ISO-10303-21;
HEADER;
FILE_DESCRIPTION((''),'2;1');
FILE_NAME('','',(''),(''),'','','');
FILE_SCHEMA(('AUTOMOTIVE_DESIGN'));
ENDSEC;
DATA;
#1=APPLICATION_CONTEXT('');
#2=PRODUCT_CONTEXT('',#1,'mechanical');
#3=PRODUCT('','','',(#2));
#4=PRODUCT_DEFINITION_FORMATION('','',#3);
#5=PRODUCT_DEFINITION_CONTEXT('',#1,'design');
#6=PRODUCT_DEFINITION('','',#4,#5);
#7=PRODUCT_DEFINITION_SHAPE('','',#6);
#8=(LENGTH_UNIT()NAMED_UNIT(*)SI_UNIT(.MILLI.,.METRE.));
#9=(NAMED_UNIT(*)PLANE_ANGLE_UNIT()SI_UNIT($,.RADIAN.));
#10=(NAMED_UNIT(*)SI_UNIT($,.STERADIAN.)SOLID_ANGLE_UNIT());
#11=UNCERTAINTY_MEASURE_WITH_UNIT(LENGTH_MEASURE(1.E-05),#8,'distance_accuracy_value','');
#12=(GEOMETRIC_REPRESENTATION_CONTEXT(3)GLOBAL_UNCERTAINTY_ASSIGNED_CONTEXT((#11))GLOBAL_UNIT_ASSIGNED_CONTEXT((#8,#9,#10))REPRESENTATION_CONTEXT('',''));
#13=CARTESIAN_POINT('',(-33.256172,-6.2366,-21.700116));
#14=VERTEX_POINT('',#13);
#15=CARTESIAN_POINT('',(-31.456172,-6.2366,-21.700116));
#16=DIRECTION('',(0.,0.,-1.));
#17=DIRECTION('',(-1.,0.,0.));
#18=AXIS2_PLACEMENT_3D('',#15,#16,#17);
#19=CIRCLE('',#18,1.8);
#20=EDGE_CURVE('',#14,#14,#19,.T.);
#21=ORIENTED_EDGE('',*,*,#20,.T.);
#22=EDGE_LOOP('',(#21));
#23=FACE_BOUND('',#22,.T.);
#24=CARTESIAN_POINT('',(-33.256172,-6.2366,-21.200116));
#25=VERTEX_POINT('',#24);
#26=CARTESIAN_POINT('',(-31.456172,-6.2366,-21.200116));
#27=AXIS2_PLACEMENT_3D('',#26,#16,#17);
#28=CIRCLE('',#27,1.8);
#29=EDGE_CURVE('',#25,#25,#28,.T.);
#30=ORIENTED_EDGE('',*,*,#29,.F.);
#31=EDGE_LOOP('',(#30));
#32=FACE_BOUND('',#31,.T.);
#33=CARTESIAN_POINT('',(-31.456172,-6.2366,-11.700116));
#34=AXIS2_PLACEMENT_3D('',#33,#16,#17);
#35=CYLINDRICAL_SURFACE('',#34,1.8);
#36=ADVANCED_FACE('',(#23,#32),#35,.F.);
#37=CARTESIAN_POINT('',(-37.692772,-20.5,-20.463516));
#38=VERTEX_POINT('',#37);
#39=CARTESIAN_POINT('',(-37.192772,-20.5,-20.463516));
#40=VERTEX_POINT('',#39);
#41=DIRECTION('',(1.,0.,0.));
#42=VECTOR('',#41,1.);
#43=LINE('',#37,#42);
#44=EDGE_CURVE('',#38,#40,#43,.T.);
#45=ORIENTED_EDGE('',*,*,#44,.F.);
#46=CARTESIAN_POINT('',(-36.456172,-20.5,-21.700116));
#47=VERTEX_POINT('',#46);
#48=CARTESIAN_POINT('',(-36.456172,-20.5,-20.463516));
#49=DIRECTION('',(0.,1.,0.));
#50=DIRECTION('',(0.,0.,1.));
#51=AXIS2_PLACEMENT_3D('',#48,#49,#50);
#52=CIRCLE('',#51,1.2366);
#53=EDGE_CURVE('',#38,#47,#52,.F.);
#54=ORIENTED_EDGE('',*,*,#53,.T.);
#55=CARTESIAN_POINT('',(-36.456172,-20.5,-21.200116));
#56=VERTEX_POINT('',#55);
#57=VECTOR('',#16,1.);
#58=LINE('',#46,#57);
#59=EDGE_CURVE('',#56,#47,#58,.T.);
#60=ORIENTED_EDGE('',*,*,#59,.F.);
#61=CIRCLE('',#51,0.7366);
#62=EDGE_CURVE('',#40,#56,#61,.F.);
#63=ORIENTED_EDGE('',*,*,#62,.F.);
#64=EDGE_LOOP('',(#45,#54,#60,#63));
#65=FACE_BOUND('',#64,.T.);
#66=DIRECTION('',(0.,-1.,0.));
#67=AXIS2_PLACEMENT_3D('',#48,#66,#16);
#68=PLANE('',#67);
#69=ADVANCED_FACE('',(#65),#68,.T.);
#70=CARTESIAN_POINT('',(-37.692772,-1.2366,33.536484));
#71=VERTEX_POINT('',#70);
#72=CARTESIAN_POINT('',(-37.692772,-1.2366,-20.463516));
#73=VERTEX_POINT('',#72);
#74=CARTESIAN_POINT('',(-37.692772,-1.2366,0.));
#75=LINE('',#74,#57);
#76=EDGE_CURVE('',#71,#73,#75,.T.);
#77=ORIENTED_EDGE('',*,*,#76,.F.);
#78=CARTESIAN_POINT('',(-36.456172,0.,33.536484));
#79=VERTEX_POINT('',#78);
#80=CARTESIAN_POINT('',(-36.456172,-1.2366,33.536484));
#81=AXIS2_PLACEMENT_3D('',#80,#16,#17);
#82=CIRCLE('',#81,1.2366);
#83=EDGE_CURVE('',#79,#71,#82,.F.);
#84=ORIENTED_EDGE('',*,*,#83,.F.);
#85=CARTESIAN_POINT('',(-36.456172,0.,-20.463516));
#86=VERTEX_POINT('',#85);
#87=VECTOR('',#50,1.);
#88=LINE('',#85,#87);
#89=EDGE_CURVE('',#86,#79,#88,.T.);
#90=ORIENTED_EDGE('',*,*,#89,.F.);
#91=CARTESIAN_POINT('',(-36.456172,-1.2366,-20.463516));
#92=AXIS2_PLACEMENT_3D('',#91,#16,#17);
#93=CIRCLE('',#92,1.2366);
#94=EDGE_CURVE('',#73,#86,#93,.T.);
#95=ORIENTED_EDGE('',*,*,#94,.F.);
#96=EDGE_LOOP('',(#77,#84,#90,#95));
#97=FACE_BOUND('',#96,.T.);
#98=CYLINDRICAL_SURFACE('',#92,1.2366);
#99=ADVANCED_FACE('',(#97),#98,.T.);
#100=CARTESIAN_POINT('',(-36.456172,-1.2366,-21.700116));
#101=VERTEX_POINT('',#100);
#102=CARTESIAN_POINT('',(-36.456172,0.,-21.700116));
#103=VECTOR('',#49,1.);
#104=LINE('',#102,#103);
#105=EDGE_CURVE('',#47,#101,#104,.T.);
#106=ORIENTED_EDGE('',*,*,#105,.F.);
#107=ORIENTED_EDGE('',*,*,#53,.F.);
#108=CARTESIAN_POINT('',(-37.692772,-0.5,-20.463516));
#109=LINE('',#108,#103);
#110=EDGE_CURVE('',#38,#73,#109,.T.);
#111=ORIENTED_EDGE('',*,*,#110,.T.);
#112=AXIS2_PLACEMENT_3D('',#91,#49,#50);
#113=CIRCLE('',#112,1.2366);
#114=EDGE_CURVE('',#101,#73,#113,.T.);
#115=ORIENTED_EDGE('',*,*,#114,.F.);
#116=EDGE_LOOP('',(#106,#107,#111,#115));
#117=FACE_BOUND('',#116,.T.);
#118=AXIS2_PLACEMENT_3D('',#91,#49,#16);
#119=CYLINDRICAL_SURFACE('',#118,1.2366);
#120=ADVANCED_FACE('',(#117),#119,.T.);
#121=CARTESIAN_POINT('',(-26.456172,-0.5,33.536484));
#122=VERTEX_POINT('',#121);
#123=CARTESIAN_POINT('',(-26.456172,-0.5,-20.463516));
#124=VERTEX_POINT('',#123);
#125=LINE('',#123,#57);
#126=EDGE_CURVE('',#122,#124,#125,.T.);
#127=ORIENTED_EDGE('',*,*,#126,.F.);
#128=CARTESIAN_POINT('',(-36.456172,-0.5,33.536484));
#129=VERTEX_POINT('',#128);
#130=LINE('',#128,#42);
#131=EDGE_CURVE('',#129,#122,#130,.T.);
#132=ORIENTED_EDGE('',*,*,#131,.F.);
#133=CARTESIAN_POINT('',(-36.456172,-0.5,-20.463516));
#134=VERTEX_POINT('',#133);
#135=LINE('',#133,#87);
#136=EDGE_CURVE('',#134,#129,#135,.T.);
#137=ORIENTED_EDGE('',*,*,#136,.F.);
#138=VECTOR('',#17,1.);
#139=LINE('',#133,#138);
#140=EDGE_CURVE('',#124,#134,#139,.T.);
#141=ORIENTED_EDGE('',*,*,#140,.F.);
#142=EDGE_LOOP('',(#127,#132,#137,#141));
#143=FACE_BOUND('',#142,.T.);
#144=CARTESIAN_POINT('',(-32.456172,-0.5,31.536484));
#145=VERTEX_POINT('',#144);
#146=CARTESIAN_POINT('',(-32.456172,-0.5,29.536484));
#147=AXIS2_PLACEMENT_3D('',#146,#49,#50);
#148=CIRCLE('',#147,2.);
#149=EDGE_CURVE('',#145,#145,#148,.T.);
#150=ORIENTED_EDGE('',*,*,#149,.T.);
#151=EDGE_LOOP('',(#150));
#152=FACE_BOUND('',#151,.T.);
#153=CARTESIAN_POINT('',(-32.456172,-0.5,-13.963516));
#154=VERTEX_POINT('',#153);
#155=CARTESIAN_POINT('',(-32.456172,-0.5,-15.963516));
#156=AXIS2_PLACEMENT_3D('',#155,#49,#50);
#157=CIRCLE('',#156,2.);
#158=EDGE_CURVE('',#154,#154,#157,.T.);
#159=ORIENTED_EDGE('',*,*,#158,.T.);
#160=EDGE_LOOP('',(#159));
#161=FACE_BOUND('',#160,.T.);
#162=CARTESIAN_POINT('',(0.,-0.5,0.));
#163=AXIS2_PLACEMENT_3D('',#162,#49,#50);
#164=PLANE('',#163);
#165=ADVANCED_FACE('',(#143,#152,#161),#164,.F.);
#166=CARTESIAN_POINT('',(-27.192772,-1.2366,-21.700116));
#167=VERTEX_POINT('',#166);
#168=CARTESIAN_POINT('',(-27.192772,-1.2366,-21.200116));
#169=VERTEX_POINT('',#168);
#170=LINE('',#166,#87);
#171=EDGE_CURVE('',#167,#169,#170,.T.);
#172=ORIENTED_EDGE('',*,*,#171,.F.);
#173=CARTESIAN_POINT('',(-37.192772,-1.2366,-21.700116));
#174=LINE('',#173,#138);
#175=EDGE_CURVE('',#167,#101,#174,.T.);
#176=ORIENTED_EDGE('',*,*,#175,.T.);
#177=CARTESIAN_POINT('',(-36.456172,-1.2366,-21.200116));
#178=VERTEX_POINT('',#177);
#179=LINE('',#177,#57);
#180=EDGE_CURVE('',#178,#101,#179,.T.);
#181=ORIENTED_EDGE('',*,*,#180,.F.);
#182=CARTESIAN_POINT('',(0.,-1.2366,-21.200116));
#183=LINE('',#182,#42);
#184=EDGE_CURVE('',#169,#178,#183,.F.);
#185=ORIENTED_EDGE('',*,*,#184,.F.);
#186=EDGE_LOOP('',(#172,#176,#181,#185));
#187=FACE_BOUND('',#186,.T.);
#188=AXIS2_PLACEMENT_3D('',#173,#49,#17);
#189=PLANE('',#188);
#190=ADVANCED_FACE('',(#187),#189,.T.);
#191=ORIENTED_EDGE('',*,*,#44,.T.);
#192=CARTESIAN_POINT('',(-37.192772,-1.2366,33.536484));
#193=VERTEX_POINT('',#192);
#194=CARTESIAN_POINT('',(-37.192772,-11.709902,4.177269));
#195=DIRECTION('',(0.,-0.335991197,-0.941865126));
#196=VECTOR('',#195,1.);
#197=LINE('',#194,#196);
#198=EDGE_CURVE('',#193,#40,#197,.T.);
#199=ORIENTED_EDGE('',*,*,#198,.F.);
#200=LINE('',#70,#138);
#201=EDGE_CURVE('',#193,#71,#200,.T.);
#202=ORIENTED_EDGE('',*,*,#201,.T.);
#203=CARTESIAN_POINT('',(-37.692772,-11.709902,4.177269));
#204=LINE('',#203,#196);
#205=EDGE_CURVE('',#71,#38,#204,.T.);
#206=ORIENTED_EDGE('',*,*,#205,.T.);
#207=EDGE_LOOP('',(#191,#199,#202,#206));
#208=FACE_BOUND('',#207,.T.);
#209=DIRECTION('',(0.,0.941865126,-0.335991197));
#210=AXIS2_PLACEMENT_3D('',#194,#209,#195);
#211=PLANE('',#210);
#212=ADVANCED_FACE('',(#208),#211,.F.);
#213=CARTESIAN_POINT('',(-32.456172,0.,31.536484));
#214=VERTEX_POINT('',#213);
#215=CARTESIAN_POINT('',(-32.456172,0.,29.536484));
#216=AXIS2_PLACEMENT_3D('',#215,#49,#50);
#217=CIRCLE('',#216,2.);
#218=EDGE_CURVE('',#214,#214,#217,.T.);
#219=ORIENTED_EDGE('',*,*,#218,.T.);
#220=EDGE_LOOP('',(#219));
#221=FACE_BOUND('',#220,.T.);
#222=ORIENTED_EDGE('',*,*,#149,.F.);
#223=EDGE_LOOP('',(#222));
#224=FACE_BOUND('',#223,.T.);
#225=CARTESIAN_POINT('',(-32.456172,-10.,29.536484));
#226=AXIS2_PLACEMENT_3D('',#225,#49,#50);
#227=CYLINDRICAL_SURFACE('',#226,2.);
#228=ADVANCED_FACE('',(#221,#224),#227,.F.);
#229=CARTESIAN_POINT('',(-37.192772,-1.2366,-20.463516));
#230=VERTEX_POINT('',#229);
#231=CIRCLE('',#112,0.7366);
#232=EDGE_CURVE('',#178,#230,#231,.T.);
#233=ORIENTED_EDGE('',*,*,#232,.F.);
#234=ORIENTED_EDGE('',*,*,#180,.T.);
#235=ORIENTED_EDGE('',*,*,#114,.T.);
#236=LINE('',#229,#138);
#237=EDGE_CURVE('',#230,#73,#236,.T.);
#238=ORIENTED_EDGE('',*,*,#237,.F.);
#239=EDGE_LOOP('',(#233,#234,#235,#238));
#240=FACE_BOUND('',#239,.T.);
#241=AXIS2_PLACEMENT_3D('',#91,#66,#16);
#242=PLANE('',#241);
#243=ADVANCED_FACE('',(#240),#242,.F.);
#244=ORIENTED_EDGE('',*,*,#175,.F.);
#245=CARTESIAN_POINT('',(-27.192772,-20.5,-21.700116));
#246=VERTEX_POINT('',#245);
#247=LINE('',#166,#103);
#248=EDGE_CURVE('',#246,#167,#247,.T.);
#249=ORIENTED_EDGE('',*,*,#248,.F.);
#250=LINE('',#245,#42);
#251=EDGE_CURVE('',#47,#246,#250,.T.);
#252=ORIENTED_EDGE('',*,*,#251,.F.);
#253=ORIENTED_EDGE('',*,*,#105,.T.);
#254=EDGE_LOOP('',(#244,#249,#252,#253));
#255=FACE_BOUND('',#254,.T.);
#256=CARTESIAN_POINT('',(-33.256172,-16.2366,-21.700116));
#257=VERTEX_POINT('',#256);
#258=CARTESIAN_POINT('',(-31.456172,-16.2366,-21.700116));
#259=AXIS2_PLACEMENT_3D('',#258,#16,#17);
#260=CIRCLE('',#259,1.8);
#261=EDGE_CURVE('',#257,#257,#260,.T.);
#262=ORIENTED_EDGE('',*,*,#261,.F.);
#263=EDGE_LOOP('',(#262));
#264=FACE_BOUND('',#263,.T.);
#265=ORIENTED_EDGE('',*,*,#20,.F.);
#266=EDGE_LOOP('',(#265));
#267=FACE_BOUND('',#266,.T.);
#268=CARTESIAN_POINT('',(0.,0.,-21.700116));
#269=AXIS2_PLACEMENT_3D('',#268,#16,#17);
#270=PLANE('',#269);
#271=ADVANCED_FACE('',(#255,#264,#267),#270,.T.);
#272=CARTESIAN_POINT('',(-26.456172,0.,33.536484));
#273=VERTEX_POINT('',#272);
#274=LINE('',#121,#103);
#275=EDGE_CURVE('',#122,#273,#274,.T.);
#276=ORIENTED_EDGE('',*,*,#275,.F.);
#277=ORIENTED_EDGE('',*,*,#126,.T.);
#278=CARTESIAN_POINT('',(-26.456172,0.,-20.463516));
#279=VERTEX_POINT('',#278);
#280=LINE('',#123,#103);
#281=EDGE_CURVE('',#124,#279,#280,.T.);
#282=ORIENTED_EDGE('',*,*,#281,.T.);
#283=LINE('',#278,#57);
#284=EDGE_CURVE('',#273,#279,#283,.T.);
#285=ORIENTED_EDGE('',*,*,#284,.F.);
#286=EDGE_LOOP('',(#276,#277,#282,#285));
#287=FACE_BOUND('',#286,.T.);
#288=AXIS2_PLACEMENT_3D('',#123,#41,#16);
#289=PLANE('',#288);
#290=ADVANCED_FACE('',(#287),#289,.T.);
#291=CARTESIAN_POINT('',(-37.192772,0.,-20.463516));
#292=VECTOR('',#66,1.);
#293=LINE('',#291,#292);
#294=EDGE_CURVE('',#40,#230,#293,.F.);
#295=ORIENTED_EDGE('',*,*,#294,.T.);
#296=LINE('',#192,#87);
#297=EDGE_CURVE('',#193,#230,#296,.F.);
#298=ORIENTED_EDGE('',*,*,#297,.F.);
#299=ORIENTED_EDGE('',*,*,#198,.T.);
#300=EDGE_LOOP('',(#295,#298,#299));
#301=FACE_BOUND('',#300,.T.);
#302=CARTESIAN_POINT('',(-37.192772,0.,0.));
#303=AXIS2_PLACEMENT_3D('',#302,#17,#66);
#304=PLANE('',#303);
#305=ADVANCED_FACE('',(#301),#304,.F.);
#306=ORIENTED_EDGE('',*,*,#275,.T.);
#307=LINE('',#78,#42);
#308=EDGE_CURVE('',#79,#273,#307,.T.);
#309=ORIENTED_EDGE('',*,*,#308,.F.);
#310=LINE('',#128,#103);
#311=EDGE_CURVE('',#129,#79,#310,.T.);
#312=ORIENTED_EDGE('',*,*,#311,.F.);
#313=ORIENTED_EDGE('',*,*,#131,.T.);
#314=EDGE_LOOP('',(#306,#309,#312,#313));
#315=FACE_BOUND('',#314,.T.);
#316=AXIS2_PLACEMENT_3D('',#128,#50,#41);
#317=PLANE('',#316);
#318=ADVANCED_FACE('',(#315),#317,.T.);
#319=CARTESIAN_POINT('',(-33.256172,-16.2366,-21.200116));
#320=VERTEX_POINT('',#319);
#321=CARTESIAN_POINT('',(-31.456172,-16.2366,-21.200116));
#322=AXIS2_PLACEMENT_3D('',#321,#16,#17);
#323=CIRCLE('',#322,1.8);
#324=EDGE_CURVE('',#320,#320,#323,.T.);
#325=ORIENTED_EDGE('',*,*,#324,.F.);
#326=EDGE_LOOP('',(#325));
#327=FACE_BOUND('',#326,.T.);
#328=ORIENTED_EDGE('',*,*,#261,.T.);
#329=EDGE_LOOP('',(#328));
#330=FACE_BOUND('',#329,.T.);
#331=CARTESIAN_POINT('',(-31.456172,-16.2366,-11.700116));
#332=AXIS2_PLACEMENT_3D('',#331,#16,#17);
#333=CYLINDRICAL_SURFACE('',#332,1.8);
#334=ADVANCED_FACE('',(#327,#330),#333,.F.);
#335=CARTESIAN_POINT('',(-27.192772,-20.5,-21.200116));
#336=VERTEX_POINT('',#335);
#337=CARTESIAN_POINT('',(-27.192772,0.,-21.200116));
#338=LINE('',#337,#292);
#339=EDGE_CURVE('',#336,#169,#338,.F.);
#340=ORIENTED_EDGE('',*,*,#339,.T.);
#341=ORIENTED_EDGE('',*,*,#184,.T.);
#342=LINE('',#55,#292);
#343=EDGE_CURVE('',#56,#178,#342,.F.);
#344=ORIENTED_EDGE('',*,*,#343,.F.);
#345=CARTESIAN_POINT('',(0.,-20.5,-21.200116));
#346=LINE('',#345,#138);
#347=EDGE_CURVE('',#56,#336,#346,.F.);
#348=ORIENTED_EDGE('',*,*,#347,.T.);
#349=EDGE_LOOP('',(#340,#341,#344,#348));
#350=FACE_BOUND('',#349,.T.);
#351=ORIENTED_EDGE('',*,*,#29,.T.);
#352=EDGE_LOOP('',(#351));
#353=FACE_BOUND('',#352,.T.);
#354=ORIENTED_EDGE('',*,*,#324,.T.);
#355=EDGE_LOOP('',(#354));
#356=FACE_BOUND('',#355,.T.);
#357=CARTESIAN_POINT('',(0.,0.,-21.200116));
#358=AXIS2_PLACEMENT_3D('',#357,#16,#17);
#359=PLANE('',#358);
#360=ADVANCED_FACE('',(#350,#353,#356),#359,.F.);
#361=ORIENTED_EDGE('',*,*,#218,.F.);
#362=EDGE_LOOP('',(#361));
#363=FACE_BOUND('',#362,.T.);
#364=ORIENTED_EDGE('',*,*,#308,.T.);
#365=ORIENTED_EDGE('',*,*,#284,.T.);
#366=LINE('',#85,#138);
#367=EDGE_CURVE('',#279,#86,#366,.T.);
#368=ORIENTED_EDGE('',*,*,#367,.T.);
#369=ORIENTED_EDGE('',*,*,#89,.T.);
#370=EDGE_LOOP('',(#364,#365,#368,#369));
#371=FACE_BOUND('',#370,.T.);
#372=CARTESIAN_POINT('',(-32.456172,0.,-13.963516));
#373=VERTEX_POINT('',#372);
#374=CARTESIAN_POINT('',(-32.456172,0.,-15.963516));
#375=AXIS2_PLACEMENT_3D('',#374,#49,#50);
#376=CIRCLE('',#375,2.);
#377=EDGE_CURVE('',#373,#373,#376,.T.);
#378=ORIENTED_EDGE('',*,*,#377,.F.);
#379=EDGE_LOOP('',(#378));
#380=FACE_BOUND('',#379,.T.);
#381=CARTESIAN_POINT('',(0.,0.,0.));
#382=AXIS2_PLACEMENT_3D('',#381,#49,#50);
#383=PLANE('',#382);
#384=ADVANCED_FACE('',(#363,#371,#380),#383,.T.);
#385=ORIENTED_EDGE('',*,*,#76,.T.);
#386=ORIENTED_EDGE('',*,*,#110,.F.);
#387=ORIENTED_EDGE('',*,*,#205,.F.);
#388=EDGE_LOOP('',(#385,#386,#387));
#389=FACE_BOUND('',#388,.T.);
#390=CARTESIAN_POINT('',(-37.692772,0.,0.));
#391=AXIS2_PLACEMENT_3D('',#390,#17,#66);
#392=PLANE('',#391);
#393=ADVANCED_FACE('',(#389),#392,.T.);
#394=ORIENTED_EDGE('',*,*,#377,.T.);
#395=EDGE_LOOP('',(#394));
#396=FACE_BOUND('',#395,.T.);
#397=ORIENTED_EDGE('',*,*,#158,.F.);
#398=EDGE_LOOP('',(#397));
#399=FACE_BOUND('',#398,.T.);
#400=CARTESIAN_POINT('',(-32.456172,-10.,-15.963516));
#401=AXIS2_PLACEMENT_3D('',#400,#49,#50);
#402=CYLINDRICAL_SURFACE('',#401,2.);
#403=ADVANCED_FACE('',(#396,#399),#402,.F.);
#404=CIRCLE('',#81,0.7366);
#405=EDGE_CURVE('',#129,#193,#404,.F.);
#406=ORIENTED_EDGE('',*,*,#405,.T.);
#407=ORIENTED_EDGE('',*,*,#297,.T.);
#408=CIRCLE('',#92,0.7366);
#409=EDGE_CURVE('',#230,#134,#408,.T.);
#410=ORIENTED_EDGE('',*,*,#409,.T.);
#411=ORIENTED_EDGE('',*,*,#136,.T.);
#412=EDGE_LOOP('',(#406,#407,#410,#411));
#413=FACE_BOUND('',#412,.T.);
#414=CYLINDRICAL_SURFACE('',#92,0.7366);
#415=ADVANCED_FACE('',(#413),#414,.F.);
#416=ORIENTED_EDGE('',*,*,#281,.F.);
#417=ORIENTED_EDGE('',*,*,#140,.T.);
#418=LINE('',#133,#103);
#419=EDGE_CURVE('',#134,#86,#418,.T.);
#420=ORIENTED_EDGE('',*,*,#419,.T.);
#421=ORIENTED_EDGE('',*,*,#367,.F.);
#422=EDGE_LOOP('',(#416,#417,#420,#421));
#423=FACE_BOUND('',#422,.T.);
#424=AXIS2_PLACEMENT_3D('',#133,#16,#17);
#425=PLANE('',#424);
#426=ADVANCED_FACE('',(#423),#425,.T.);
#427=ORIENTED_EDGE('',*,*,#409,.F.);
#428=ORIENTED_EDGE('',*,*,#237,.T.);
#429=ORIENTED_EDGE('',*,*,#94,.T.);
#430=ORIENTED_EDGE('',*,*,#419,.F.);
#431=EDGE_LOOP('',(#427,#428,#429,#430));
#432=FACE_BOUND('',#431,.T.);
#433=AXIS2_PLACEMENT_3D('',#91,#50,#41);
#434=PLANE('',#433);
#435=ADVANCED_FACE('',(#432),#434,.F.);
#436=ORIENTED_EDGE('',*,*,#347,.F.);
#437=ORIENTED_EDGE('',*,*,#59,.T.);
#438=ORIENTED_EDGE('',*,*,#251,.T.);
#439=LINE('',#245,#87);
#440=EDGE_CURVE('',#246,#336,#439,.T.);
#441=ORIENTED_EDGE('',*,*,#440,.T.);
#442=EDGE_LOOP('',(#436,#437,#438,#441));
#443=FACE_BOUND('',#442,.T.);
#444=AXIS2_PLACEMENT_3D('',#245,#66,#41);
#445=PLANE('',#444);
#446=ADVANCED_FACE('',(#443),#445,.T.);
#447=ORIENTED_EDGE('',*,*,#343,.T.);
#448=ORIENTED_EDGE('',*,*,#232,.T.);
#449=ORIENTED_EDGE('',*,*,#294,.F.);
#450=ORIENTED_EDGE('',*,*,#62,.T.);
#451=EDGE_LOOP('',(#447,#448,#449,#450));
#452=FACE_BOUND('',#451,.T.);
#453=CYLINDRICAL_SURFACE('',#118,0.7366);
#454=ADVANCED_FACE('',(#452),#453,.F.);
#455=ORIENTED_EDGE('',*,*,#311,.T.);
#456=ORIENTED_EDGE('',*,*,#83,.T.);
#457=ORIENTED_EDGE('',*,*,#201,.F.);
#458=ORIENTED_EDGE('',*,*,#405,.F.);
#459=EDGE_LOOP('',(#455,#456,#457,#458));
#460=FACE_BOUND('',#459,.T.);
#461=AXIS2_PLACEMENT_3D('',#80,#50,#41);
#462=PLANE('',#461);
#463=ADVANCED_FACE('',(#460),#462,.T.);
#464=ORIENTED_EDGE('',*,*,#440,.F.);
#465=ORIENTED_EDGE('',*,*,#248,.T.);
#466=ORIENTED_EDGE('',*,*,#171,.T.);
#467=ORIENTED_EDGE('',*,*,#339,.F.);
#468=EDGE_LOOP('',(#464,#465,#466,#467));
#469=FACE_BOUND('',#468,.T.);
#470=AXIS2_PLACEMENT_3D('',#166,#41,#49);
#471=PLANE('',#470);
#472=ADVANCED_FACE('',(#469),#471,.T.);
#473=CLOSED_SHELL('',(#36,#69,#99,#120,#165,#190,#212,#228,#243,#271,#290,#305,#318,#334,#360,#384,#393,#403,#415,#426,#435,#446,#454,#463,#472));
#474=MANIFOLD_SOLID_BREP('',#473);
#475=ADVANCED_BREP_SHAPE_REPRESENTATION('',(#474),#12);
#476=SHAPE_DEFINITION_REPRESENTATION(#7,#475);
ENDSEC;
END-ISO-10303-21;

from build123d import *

# Parameters (mm, degrees)
SKETCH1_W          = 10
SKETCH1_H          = 54
BASE_FLANGE1_DEPTH = 0.5
EDGE_FLANGE1_DEPTH = 54
CUT_EXTRUDE1_DEPTH = 10
EDGE_FLANGE2_DEPTH = 19.2634
SKETCH11_R         = 1.8
CUT_EXTRUDE2_DEPTH = 10
SKETCH12_R         = 2
CUT_EXTRUDE3_DEPTH = 10


# Sheet-metal steps are written as plain solids
with BuildPart() as part:
    # Sketch1 → Base-Flange1 (new body)
    with BuildSketch(Plane(origin=(0, 0, 0), x_dir=(1, 0, 0), z_dir=(0, 1, 0))):
        with Locations((-31.456172324, -6.536484397)):
            Rectangle(SKETCH1_W, SKETCH1_H)
    extrude(amount=-BASE_FLANGE1_DEPTH)

    # Edge-Flange1 section (across the edge) → Edge-Flange1 (add)
    with BuildSketch(Plane(origin=(-37.192772324, -0.5, 33.536484397), x_dir=(1, 0, 0), z_dir=(0, 0, -1))):
        with BuildLine():
            Line((-0.5, 0.7366), (-0.5, 20))
            Line((-0.5, 20), (0, 20))
            Line((0, 20), (0, 0.7366))
            ThreePointArc((0, 0.7366), (0.215745145, 0.215745145), (0.7366, 0))
            Line((0.7366, 0), (0.7366, -0.5))
            ThreePointArc((0.7366, -0.5), (-0.137808246, -0.137808246), (-0.5, 0.7366))
        make_face()
    extrude(amount=EDGE_FLANGE1_DEPTH)

    # Sketch7 → Cut-Extrude1 (cut)
    with BuildSketch(Plane.ZY.offset(37.692772324)):
        Polygon((-20.463515603, -20.5), (33.536484397, -1.2366), (33.536484397, -20.5), align=None)
    extrude(amount=-CUT_EXTRUDE1_DEPTH, mode=Mode.SUBTRACT)

    # Edge-Flange2 section (across the edge) → Edge-Flange2 (add)
    with BuildSketch(Plane(origin=(-37.192772324, -20.5, -21.200115603), x_dir=(0, 0, 1), z_dir=(0, 1, 0))):
        with BuildLine():
            Line((-0.5, 0.7366), (-0.5, 10))
            Line((-0.5, 10), (0, 10))
            Line((0, 10), (0, 0.7366))
            ThreePointArc((0, 0.7366), (0.215745145, 0.215745145), (0.7366, 0))
            Line((0.7366, 0), (0.7366, -0.5))
            ThreePointArc((0.7366, -0.5), (-0.137808246, -0.137808246), (-0.5, 0.7366))
        make_face()
    extrude(amount=EDGE_FLANGE2_DEPTH)

    # Sketch11 → Cut-Extrude2 (cut)
    with BuildSketch(Plane(origin=(0, 0, -21.700115603), x_dir=(-1, 0, 0), z_dir=(0, 0, -1))):
        with Locations((31.456172324, -6.2366)):
            Circle(SKETCH11_R)
        with Locations((31.456172324, -16.2366)):
            Circle(SKETCH11_R)
    extrude(amount=-CUT_EXTRUDE2_DEPTH, mode=Mode.SUBTRACT)

    # Sketch12 → Cut-Extrude3 (cut)
    with BuildSketch(Plane(origin=(0, 0, 0), x_dir=(1, 0, 0), z_dir=(0, 1, 0))):
        with Locations(Location((-32.456172324, -29.536484397, 0), (0, 0, 270))):
            Circle(SKETCH12_R)
        with Locations(Location((-32.456172324, 15.963515603, 0), (0, 0, 270))):
            Circle(SKETCH12_R)
    extrude(amount=-CUT_EXTRUDE3_DEPTH, mode=Mode.SUBTRACT)


solid = part.part
